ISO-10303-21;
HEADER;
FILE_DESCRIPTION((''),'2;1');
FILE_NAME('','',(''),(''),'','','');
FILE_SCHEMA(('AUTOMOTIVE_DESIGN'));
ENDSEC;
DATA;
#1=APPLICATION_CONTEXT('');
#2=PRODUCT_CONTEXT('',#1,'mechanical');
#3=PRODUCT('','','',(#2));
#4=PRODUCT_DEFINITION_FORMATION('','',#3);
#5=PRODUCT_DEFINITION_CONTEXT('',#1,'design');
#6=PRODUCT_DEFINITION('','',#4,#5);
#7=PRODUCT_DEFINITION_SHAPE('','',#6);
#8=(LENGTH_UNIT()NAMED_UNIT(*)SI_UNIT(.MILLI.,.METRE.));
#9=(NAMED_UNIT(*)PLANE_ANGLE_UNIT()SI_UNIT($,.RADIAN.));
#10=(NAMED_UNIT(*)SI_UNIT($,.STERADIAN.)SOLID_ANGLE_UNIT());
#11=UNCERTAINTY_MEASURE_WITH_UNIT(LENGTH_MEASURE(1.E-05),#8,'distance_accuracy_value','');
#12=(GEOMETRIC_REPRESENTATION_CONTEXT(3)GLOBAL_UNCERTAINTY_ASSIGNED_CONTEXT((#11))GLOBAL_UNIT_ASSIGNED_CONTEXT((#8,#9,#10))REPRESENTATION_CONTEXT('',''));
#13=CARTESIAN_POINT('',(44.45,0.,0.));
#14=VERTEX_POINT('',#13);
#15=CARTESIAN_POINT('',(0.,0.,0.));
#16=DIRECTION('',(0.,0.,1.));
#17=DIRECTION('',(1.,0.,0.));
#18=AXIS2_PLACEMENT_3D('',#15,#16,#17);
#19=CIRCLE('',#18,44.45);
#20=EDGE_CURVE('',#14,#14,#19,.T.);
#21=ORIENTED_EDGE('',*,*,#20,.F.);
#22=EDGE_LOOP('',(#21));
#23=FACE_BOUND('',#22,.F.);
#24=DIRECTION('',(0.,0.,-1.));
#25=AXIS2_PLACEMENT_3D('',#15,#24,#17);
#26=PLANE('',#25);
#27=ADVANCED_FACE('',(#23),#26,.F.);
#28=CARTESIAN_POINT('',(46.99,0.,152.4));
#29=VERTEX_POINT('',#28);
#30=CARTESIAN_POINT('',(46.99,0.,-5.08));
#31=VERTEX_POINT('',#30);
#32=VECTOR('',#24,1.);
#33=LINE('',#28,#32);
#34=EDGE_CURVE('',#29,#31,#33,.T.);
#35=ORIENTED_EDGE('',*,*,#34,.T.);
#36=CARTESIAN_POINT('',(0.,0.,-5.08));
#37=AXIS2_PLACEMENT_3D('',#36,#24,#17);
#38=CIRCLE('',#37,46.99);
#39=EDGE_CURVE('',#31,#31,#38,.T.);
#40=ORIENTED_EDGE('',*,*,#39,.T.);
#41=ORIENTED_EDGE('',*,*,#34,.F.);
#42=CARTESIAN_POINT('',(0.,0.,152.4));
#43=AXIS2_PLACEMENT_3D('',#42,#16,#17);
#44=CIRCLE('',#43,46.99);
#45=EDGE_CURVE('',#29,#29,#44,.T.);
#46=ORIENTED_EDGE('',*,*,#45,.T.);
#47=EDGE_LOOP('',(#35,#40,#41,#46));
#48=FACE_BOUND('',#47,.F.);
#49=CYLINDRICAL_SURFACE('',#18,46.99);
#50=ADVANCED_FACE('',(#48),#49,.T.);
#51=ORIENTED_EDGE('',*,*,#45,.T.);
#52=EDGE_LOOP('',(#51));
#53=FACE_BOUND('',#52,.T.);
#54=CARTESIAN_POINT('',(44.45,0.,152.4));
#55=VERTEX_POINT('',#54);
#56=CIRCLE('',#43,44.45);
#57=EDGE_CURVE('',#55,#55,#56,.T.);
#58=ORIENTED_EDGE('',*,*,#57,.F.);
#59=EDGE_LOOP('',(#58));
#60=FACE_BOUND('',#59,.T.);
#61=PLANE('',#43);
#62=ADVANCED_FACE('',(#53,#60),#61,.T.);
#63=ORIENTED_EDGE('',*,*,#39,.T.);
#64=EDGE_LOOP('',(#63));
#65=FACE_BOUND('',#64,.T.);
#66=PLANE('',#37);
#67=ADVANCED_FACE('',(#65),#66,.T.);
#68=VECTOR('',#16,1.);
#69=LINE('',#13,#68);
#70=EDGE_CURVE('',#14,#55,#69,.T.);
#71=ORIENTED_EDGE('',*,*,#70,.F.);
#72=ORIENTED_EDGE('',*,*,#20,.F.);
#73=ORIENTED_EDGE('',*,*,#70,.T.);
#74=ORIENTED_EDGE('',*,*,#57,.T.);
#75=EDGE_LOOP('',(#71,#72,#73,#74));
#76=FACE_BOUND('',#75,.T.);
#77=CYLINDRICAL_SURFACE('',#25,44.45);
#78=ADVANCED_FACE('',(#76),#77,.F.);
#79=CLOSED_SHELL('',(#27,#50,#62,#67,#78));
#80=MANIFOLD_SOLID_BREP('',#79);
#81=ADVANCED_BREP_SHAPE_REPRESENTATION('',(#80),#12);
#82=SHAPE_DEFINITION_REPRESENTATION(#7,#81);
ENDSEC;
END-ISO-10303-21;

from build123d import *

# Parameters (mm, degrees)
F0_R     = 46.99
F0_R_2   = 44.45
F1_DEPTH = 152.4
F2_R     = 46.99
F2_R_2   = 44.45
F3_DEPTH = 5.08


with BuildPart() as f1:
    # F0 (on Top) → F1 (new body)
    with BuildSketch(Plane.XY):
        Circle(F0_R)
        Circle(F0_R_2, mode=Mode.SUBTRACT)
    extrude(amount=F1_DEPTH)

    # F2 (on face) → F3 (join)
    with BuildSketch(Plane(origin=(0, 0, 0), x_dir=(1, 0, 0), z_dir=(0, 0, -1))):
        Circle(F2_R)
        Circle(F2_R_2, mode=Mode.SUBTRACT)
        Circle(F2_R_2)
    extrude(amount=F3_DEPTH)


solid = f1.part
